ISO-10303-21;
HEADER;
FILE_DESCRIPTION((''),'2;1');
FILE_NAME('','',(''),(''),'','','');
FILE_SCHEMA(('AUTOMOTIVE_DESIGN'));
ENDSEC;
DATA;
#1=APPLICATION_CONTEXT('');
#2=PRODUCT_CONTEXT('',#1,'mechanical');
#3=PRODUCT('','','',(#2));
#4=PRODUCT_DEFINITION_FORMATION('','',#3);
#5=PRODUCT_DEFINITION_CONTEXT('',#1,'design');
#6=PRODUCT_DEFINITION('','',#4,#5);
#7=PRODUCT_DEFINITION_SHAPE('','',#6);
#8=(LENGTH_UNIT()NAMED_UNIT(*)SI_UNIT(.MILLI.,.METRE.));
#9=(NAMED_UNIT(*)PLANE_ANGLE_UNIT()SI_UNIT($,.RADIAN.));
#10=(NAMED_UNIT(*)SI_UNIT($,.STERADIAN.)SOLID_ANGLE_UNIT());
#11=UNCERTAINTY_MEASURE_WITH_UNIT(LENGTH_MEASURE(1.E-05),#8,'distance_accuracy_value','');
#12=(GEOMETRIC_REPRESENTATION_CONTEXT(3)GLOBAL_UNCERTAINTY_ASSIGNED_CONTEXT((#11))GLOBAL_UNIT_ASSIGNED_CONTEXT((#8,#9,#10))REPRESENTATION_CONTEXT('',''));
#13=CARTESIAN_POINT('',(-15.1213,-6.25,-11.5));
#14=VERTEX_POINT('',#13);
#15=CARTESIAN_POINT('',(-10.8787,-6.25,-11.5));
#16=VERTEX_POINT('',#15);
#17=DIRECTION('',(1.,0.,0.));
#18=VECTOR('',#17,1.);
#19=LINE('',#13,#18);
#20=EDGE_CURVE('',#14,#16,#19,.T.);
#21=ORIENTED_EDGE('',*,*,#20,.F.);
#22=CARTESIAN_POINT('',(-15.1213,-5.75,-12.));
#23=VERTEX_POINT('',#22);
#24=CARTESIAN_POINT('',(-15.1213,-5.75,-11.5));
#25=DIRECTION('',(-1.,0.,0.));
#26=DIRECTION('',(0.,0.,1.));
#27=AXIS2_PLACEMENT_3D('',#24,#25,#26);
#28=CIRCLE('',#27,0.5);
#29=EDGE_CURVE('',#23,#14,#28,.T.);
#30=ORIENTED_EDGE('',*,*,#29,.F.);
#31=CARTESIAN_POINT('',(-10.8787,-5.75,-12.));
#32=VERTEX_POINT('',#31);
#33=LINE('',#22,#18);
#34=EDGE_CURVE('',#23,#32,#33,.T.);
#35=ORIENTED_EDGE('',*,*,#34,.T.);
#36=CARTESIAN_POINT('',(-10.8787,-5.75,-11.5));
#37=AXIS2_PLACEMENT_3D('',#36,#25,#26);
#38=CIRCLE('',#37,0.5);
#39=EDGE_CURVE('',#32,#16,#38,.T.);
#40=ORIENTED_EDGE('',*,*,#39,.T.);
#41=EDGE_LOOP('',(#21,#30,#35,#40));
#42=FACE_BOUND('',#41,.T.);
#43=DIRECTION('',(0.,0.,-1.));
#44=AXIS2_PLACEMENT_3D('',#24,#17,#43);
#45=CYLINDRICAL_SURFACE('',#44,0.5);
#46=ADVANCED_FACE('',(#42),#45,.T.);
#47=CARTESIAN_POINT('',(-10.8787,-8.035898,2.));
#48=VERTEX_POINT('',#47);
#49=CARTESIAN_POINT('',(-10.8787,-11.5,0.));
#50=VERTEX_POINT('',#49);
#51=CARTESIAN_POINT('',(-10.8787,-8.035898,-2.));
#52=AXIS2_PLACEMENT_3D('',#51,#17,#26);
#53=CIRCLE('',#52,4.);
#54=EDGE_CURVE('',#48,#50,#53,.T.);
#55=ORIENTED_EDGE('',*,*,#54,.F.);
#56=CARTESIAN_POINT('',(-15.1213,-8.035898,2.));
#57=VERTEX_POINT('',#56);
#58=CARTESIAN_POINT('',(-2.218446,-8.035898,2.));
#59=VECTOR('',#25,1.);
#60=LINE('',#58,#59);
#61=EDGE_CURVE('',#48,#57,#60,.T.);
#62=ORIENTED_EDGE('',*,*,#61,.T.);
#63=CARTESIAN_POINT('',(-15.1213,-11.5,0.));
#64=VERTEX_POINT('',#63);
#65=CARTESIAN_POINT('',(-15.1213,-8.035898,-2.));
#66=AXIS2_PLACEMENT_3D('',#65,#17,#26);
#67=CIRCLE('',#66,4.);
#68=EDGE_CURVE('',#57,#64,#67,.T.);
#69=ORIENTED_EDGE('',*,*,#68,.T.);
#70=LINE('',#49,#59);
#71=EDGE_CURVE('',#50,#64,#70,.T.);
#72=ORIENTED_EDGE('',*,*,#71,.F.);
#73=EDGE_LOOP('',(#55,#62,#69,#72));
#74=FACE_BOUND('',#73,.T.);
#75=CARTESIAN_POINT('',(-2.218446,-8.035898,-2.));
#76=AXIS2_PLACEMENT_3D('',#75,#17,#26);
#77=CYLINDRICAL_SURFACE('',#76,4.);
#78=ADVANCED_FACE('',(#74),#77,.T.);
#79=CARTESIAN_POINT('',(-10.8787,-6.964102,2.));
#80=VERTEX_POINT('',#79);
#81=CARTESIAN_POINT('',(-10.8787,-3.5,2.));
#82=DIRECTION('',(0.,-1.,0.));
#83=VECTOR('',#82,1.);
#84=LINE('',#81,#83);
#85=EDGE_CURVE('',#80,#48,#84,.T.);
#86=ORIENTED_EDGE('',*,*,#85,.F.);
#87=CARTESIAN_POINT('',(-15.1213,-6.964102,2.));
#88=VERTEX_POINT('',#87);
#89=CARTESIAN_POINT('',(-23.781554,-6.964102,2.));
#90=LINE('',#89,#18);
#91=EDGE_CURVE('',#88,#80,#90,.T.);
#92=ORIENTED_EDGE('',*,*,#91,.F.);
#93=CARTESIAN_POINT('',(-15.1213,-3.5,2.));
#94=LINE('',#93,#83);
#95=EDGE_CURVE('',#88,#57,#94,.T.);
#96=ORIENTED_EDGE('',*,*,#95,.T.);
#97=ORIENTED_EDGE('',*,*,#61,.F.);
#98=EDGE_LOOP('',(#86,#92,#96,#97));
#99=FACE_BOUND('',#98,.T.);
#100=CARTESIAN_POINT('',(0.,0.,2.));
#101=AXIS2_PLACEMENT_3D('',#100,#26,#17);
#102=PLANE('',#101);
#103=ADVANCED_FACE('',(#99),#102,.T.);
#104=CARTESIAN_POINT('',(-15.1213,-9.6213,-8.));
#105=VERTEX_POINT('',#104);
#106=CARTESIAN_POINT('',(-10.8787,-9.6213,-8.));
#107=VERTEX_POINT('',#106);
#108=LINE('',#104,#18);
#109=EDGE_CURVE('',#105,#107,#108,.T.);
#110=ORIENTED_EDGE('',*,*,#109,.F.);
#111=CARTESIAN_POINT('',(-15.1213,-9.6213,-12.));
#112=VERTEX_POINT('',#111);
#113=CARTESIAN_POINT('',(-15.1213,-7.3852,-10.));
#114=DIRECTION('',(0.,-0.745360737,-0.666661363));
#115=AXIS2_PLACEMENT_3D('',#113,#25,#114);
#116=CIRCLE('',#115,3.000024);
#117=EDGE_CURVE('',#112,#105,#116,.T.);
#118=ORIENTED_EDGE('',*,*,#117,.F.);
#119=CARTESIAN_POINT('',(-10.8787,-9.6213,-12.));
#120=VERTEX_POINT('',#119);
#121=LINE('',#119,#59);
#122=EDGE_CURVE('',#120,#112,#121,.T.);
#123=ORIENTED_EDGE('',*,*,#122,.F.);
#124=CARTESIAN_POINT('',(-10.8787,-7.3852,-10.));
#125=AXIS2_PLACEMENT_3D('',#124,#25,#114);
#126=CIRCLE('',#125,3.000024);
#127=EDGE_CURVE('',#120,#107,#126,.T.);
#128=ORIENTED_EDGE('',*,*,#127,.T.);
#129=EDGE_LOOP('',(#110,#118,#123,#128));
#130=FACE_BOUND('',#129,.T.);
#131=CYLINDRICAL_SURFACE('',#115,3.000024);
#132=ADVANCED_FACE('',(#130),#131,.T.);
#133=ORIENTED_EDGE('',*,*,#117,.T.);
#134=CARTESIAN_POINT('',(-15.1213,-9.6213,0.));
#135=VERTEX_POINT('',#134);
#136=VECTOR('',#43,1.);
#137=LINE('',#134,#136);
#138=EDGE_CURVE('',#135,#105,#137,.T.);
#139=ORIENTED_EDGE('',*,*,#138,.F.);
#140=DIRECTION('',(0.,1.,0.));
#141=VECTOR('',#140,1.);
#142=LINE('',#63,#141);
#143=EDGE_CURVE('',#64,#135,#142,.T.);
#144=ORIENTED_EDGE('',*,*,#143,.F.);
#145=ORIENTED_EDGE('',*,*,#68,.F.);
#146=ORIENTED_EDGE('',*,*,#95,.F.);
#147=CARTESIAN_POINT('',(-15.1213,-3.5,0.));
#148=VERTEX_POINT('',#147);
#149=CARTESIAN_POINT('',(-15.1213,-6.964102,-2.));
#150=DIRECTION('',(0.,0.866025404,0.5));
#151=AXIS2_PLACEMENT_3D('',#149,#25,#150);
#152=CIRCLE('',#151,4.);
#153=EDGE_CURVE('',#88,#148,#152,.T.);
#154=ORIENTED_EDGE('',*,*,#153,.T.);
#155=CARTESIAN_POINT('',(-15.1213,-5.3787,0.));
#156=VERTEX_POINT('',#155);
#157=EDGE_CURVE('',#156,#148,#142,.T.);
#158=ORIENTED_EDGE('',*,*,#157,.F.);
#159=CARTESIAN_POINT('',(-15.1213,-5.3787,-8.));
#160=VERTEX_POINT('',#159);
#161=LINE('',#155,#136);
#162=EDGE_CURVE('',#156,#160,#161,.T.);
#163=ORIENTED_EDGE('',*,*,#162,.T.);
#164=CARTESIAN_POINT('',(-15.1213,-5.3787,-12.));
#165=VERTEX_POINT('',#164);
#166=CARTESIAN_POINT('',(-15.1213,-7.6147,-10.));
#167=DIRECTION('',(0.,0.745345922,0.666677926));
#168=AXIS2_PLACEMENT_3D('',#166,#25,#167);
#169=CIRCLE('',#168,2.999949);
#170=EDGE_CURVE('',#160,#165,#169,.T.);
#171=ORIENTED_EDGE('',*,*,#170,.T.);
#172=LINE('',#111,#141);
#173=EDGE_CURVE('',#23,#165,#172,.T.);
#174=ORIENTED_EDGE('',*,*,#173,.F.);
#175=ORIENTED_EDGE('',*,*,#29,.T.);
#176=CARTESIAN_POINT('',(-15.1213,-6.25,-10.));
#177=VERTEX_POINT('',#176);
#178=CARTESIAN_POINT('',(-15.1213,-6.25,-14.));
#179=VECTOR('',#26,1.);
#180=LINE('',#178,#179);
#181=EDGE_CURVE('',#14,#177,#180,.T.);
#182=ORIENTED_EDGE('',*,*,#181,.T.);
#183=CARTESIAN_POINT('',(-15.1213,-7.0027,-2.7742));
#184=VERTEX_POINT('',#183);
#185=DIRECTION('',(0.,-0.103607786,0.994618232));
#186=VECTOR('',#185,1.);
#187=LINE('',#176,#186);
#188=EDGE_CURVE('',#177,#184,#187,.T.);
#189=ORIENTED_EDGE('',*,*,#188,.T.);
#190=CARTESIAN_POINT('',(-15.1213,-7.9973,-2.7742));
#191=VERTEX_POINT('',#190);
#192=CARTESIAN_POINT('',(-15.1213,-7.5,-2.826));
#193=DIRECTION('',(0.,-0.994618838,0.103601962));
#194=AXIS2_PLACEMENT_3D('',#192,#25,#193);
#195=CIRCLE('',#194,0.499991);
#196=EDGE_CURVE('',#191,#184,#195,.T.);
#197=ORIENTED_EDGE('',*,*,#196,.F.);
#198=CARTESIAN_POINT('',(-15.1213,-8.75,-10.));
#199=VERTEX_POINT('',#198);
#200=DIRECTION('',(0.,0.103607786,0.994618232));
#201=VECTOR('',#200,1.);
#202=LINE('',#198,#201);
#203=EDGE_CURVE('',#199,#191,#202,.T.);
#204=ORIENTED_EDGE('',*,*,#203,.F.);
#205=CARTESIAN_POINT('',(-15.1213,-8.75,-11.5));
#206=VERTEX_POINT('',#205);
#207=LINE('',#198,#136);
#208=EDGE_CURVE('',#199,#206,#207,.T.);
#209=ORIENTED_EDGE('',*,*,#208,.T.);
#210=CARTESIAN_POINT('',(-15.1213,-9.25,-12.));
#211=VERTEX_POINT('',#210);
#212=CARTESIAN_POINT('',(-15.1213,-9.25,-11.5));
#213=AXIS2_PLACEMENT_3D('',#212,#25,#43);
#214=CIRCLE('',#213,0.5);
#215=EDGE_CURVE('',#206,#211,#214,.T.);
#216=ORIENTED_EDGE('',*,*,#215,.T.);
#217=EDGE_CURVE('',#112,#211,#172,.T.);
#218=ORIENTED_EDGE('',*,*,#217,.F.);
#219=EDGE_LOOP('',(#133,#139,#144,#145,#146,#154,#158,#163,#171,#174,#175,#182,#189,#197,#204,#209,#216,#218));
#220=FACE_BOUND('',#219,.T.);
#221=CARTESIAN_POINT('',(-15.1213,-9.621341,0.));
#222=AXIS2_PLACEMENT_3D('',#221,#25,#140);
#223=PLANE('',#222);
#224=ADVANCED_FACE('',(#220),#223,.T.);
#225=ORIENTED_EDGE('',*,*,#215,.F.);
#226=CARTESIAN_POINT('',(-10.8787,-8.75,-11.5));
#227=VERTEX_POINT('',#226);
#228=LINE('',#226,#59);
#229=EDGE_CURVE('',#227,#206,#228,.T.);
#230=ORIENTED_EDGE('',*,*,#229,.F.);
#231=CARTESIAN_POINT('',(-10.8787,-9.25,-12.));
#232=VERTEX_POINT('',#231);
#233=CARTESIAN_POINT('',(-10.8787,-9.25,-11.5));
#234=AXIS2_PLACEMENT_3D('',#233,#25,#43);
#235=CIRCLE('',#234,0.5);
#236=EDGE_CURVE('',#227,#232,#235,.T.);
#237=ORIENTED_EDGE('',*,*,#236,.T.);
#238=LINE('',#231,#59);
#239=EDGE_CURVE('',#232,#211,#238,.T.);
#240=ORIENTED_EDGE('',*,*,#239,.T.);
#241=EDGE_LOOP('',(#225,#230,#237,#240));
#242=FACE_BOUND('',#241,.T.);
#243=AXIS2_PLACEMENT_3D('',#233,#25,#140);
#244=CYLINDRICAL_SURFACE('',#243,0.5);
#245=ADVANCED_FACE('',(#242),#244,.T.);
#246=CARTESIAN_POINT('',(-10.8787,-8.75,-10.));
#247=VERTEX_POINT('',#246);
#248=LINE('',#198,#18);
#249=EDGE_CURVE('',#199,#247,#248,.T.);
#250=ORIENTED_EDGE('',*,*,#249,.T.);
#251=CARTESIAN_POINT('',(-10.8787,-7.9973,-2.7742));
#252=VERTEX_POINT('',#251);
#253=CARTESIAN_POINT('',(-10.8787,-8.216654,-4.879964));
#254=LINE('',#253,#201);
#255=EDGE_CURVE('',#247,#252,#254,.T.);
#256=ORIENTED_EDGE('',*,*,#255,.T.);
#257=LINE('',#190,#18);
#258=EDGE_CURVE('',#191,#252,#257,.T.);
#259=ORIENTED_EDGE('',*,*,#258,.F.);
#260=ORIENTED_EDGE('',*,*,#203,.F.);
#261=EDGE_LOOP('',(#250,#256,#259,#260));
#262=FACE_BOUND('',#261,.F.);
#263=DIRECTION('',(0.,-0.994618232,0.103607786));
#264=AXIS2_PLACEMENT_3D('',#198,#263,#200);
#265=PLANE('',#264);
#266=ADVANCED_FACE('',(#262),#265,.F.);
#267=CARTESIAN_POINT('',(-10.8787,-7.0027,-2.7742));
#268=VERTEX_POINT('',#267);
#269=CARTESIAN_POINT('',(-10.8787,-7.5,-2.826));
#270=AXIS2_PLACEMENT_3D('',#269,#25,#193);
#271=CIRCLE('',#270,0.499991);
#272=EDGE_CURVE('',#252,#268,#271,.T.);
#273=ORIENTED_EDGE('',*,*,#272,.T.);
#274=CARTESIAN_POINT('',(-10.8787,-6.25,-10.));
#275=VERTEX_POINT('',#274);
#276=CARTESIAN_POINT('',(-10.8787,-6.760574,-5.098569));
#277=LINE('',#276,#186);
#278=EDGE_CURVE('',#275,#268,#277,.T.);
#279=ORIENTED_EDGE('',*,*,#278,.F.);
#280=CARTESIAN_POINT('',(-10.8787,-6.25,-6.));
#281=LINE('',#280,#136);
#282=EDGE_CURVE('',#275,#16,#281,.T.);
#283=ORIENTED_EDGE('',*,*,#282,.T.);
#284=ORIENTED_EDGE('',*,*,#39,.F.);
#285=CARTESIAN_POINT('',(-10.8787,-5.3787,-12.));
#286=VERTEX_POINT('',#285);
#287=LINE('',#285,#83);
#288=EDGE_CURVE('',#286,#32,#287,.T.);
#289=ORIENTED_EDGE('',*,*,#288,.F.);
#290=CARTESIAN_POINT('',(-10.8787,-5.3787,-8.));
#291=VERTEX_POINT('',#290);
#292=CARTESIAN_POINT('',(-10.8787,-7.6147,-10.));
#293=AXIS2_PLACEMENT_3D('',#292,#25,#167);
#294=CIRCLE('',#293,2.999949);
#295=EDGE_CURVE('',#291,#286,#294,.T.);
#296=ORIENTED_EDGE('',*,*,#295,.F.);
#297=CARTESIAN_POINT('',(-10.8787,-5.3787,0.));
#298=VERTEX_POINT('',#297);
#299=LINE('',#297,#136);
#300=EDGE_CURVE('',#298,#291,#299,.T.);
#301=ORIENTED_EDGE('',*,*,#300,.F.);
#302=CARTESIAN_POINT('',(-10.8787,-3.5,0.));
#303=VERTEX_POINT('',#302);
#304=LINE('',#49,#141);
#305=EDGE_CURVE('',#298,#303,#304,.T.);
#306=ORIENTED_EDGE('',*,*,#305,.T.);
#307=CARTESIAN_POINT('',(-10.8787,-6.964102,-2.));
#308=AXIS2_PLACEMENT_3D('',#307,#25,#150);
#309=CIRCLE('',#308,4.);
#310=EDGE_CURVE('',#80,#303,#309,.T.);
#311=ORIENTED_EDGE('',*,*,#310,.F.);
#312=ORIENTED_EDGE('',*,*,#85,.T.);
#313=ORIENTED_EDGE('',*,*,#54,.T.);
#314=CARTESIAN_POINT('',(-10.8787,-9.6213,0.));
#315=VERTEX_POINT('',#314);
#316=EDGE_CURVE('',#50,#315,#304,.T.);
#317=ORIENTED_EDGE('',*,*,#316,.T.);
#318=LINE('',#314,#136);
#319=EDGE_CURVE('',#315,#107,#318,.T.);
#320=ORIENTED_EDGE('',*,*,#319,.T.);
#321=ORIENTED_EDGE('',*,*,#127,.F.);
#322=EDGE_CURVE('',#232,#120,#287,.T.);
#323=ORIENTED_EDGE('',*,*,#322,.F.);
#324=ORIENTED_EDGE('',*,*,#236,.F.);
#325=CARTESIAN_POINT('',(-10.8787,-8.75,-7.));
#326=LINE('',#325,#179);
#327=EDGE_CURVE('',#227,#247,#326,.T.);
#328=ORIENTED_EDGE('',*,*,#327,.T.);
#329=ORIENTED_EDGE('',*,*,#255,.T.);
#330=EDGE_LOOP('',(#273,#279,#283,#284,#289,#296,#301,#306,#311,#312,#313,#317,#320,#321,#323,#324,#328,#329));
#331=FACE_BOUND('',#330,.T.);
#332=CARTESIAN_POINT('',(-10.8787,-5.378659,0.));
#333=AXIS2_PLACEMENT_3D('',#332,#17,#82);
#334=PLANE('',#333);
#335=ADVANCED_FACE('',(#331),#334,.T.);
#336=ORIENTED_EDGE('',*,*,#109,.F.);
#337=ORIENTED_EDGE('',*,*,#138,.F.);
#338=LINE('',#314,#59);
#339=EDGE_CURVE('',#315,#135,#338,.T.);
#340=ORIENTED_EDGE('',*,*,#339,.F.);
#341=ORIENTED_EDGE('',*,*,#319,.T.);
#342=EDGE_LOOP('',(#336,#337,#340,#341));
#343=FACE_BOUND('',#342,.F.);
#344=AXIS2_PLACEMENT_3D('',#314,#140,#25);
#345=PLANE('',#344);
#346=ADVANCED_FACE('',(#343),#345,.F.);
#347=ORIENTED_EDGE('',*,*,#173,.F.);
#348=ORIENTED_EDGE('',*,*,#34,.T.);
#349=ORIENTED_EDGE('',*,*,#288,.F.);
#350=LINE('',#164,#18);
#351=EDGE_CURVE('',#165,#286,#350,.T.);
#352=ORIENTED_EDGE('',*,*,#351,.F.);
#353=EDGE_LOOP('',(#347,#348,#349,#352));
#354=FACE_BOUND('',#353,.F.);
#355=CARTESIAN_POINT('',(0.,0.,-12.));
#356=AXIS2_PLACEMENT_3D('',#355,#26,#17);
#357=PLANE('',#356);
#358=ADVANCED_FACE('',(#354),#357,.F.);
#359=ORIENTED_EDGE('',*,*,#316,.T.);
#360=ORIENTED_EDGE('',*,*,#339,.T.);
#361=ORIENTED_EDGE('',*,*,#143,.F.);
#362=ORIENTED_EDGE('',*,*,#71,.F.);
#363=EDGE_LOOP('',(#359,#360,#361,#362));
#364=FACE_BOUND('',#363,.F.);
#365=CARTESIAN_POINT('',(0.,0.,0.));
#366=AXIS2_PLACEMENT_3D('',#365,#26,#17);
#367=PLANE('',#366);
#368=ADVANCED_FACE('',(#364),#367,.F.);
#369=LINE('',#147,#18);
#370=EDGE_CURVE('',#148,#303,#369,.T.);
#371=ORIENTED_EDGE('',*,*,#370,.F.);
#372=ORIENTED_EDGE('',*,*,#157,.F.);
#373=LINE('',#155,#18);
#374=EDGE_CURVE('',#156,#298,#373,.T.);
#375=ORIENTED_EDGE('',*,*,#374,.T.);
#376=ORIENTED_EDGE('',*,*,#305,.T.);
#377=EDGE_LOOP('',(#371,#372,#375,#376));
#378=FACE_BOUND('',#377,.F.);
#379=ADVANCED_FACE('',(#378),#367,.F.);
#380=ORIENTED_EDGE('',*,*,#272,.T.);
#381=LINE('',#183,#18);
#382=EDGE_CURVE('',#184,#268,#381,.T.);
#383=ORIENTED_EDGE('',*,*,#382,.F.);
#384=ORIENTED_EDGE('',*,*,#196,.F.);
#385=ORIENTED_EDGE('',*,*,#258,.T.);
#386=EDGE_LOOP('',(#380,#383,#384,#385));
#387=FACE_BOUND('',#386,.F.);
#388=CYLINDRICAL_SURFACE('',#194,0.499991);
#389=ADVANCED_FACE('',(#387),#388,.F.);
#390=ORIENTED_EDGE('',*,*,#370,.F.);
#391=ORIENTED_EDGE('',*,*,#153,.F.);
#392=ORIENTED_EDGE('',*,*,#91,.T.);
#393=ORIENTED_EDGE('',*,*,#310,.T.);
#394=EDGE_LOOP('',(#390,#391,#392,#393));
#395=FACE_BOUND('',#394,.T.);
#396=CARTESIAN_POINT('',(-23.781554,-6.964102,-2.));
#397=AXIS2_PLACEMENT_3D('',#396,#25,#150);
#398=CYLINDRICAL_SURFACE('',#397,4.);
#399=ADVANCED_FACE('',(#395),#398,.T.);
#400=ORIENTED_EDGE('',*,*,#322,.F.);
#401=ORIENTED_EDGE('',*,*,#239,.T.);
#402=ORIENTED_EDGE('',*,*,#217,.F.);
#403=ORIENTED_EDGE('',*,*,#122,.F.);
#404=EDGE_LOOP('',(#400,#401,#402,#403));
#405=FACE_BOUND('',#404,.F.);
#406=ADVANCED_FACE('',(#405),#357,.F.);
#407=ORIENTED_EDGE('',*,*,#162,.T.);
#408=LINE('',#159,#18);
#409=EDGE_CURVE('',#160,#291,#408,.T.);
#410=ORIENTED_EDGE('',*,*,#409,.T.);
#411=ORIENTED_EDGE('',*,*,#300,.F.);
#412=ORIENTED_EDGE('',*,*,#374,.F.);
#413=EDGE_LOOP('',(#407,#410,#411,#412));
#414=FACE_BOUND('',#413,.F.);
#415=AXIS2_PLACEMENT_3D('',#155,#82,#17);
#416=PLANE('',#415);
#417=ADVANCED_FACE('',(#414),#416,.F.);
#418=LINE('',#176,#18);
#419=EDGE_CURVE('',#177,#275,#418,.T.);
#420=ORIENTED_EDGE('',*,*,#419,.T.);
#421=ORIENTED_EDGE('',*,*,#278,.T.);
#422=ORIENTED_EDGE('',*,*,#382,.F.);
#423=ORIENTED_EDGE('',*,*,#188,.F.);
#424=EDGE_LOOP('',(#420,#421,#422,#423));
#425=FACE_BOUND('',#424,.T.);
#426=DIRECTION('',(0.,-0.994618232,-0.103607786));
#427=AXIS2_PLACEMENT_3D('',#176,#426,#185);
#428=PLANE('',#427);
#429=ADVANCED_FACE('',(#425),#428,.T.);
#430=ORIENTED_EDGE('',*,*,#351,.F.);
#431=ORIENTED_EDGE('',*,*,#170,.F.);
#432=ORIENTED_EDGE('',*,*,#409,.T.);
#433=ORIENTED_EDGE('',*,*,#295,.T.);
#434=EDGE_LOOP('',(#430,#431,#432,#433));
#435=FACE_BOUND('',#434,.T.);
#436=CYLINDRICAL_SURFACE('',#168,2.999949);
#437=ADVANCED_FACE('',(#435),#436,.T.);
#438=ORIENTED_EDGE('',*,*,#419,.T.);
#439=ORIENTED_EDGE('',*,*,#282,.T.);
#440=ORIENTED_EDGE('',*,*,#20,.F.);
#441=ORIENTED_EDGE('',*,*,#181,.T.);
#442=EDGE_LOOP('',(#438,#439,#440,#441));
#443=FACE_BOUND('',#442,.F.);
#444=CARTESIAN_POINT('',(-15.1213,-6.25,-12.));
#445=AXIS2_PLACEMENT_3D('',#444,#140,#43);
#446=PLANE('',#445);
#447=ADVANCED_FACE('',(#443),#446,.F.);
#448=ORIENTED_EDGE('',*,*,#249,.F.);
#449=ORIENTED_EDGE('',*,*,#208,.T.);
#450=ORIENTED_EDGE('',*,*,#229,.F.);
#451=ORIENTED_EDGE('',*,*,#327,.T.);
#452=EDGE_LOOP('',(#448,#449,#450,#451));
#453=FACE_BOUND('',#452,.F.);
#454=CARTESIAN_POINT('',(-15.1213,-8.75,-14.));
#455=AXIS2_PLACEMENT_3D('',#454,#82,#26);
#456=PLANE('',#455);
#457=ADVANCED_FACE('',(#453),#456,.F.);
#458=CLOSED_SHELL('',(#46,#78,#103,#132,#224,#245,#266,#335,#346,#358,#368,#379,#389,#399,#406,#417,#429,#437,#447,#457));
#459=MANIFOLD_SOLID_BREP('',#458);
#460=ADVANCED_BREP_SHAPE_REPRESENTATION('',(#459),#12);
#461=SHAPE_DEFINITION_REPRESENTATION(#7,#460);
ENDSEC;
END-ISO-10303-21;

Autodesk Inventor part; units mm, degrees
ref_plane "YZ Plane" through (0, 0, 0) normal (1, 0, 0) x (0, 1, 0)
ref_plane "XZ Plane" through (0, 0, 0) normal (0, 1, 0) x (-1, 0, 0)
ref_plane "XY Plane" through (0, 0, 0) normal (0, 0, 1) x (1, 0, 0)
ref_plane "Work Plane1" through (0, 0, 0) normal (0, 0, 1) x (1, 0, 0)
sketch "Sketch1" plane through (0, 0, 0) normal (0, 0, 1) x (1, 0, 0)
  circle A0 centre (-13, -7.5) radius 3 projected
  line L0 (-13, -7.5) -> (-10.8787, -9.6213) construction
  line L1 (-13, -7.5) -> (-10, -7.5) construction
  line L2 (-15.1213, -5.3787) -> (-10.8787, -5.3787)
  line L3 (-10.8787, -5.3787) -> (-10.8787, -9.6213)
  line L4 (-10.8787, -9.6213) -> (-15.1213, -9.6213)
  line L5 (-15.1213, -9.6213) -> (-15.1213, -5.3787)
  line L6 (-15.1213, -5.3787) -> (-10.8787, -9.6213) construction
  line L7 (-10.8787, -5.3787) -> (-15.1213, -9.6213) construction
  point P0 (0, 0)
  dimension "d0" = 45
extrude "Extrusion1" add sketch "Sketch1" against normal blind 12 contours L3 L4 L5 L2
sketch "Sketch2" plane through (0, 0, 0) normal (0, 0, 1) x (1, 0, 0)
  circle A0 centre (-13, -7.5) radius 3 projected
  line L0 (-10.8787, -11.5) -> (-15.1213, -11.5)
  line L1 (-15.1213, -11.5) -> (-15.1213, -3.5)
  line L2 (-15.1213, -3.5) -> (-10.8787, -3.5)
  line L3 (-10.8787, -3.5) -> (-10.8787, -11.5)
  line L4 (-10.8787, -11.5) -> (-15.1213, -3.5) construction
  line L5 (-15.1213, -11.5) -> (-10.8787, -3.5) construction
  point P0 (0, 0)
  dimension "d3" = 8
extrude "Extrusion2" add sketch "Sketch2" along normal blind 2 contours L3 A0 L1 | A0 L1 L2 L3 | L3 L0 L1 A0
fillet "Fillet1" radius 4 2 edges at (-13, -3.5, 2) (-13, -11.5, 2)
sketch "Sketch3" plane through (-15.1213, -9.6213, -12) normal (-1, 0, 0) x (0, 0, 1)
  line L0 (4, 9.5928) -> (4, -5.4072) projected
  line L1 (12, 0) -> (0, 0) projected
  arc A0 (0, 0) -> (4, 0) centre (2, 2.2361) ccw
  line L2 (12, 4.2426) -> (0, 4.2426) projected
  arc A1 (4, 4.2426) -> (0, 4.2426) centre (2, 2.0066) ccw
  point P0 (12, 9.6213)
  dimension "d7" = 3
  dimension "d8" = 3
extrude "Extrusion3" add sketch "Sketch3" against normal up to surface (4.2426 mm away)
sketch "Sketch4" plane through (-15.1213, -5.3787, 0) normal (-1, 0, 0) x (0, 0, 1)
  line L0 (-14, -3.3713) -> (-10, -3.3713)
  line L1 (-10, -3.3713) -> (-10, -0.8713)
  line L2 (-10, -0.8713) -> (-14, -0.8713)
  line L3 (-14, -0.8713) -> (-14, -3.3713)
  line L4 (-12, -4.2426) -> (-12, 0) projected
  line L5 (-14, -3.3713) -> (-10, -0.8713) construction
  line L6 (-10, -3.3713) -> (-14, -0.8713) construction
  line L7 (-10, -3.3713) -> (-2.7742, -2.6186)
  line L8 (2, -1.5854) -> (2, -2.6572) projected
  line L9 (-10, -0.8713) -> (-2.7742, -1.624)
  arc A0 (-2.7742, -2.6186) -> (-2.7742, -1.624) centre (-2.826, -2.1213) ccw
  point P0 (0, 5.3787)
  point P1 (-12, -2.1213)
  point P2 (2, -2.1213)
  dimension "d11" = 4
  dimension "d12" = 2.5
  dimension "d13" = 0.5
extrude "Extrusion4" cut sketch "Sketch4" against normal up to next
fillet "Fillet2" radius 0.5 2 edges at (-13, -6.25, -12) (-13, -8.75, -12)
properties part number "fastener"
